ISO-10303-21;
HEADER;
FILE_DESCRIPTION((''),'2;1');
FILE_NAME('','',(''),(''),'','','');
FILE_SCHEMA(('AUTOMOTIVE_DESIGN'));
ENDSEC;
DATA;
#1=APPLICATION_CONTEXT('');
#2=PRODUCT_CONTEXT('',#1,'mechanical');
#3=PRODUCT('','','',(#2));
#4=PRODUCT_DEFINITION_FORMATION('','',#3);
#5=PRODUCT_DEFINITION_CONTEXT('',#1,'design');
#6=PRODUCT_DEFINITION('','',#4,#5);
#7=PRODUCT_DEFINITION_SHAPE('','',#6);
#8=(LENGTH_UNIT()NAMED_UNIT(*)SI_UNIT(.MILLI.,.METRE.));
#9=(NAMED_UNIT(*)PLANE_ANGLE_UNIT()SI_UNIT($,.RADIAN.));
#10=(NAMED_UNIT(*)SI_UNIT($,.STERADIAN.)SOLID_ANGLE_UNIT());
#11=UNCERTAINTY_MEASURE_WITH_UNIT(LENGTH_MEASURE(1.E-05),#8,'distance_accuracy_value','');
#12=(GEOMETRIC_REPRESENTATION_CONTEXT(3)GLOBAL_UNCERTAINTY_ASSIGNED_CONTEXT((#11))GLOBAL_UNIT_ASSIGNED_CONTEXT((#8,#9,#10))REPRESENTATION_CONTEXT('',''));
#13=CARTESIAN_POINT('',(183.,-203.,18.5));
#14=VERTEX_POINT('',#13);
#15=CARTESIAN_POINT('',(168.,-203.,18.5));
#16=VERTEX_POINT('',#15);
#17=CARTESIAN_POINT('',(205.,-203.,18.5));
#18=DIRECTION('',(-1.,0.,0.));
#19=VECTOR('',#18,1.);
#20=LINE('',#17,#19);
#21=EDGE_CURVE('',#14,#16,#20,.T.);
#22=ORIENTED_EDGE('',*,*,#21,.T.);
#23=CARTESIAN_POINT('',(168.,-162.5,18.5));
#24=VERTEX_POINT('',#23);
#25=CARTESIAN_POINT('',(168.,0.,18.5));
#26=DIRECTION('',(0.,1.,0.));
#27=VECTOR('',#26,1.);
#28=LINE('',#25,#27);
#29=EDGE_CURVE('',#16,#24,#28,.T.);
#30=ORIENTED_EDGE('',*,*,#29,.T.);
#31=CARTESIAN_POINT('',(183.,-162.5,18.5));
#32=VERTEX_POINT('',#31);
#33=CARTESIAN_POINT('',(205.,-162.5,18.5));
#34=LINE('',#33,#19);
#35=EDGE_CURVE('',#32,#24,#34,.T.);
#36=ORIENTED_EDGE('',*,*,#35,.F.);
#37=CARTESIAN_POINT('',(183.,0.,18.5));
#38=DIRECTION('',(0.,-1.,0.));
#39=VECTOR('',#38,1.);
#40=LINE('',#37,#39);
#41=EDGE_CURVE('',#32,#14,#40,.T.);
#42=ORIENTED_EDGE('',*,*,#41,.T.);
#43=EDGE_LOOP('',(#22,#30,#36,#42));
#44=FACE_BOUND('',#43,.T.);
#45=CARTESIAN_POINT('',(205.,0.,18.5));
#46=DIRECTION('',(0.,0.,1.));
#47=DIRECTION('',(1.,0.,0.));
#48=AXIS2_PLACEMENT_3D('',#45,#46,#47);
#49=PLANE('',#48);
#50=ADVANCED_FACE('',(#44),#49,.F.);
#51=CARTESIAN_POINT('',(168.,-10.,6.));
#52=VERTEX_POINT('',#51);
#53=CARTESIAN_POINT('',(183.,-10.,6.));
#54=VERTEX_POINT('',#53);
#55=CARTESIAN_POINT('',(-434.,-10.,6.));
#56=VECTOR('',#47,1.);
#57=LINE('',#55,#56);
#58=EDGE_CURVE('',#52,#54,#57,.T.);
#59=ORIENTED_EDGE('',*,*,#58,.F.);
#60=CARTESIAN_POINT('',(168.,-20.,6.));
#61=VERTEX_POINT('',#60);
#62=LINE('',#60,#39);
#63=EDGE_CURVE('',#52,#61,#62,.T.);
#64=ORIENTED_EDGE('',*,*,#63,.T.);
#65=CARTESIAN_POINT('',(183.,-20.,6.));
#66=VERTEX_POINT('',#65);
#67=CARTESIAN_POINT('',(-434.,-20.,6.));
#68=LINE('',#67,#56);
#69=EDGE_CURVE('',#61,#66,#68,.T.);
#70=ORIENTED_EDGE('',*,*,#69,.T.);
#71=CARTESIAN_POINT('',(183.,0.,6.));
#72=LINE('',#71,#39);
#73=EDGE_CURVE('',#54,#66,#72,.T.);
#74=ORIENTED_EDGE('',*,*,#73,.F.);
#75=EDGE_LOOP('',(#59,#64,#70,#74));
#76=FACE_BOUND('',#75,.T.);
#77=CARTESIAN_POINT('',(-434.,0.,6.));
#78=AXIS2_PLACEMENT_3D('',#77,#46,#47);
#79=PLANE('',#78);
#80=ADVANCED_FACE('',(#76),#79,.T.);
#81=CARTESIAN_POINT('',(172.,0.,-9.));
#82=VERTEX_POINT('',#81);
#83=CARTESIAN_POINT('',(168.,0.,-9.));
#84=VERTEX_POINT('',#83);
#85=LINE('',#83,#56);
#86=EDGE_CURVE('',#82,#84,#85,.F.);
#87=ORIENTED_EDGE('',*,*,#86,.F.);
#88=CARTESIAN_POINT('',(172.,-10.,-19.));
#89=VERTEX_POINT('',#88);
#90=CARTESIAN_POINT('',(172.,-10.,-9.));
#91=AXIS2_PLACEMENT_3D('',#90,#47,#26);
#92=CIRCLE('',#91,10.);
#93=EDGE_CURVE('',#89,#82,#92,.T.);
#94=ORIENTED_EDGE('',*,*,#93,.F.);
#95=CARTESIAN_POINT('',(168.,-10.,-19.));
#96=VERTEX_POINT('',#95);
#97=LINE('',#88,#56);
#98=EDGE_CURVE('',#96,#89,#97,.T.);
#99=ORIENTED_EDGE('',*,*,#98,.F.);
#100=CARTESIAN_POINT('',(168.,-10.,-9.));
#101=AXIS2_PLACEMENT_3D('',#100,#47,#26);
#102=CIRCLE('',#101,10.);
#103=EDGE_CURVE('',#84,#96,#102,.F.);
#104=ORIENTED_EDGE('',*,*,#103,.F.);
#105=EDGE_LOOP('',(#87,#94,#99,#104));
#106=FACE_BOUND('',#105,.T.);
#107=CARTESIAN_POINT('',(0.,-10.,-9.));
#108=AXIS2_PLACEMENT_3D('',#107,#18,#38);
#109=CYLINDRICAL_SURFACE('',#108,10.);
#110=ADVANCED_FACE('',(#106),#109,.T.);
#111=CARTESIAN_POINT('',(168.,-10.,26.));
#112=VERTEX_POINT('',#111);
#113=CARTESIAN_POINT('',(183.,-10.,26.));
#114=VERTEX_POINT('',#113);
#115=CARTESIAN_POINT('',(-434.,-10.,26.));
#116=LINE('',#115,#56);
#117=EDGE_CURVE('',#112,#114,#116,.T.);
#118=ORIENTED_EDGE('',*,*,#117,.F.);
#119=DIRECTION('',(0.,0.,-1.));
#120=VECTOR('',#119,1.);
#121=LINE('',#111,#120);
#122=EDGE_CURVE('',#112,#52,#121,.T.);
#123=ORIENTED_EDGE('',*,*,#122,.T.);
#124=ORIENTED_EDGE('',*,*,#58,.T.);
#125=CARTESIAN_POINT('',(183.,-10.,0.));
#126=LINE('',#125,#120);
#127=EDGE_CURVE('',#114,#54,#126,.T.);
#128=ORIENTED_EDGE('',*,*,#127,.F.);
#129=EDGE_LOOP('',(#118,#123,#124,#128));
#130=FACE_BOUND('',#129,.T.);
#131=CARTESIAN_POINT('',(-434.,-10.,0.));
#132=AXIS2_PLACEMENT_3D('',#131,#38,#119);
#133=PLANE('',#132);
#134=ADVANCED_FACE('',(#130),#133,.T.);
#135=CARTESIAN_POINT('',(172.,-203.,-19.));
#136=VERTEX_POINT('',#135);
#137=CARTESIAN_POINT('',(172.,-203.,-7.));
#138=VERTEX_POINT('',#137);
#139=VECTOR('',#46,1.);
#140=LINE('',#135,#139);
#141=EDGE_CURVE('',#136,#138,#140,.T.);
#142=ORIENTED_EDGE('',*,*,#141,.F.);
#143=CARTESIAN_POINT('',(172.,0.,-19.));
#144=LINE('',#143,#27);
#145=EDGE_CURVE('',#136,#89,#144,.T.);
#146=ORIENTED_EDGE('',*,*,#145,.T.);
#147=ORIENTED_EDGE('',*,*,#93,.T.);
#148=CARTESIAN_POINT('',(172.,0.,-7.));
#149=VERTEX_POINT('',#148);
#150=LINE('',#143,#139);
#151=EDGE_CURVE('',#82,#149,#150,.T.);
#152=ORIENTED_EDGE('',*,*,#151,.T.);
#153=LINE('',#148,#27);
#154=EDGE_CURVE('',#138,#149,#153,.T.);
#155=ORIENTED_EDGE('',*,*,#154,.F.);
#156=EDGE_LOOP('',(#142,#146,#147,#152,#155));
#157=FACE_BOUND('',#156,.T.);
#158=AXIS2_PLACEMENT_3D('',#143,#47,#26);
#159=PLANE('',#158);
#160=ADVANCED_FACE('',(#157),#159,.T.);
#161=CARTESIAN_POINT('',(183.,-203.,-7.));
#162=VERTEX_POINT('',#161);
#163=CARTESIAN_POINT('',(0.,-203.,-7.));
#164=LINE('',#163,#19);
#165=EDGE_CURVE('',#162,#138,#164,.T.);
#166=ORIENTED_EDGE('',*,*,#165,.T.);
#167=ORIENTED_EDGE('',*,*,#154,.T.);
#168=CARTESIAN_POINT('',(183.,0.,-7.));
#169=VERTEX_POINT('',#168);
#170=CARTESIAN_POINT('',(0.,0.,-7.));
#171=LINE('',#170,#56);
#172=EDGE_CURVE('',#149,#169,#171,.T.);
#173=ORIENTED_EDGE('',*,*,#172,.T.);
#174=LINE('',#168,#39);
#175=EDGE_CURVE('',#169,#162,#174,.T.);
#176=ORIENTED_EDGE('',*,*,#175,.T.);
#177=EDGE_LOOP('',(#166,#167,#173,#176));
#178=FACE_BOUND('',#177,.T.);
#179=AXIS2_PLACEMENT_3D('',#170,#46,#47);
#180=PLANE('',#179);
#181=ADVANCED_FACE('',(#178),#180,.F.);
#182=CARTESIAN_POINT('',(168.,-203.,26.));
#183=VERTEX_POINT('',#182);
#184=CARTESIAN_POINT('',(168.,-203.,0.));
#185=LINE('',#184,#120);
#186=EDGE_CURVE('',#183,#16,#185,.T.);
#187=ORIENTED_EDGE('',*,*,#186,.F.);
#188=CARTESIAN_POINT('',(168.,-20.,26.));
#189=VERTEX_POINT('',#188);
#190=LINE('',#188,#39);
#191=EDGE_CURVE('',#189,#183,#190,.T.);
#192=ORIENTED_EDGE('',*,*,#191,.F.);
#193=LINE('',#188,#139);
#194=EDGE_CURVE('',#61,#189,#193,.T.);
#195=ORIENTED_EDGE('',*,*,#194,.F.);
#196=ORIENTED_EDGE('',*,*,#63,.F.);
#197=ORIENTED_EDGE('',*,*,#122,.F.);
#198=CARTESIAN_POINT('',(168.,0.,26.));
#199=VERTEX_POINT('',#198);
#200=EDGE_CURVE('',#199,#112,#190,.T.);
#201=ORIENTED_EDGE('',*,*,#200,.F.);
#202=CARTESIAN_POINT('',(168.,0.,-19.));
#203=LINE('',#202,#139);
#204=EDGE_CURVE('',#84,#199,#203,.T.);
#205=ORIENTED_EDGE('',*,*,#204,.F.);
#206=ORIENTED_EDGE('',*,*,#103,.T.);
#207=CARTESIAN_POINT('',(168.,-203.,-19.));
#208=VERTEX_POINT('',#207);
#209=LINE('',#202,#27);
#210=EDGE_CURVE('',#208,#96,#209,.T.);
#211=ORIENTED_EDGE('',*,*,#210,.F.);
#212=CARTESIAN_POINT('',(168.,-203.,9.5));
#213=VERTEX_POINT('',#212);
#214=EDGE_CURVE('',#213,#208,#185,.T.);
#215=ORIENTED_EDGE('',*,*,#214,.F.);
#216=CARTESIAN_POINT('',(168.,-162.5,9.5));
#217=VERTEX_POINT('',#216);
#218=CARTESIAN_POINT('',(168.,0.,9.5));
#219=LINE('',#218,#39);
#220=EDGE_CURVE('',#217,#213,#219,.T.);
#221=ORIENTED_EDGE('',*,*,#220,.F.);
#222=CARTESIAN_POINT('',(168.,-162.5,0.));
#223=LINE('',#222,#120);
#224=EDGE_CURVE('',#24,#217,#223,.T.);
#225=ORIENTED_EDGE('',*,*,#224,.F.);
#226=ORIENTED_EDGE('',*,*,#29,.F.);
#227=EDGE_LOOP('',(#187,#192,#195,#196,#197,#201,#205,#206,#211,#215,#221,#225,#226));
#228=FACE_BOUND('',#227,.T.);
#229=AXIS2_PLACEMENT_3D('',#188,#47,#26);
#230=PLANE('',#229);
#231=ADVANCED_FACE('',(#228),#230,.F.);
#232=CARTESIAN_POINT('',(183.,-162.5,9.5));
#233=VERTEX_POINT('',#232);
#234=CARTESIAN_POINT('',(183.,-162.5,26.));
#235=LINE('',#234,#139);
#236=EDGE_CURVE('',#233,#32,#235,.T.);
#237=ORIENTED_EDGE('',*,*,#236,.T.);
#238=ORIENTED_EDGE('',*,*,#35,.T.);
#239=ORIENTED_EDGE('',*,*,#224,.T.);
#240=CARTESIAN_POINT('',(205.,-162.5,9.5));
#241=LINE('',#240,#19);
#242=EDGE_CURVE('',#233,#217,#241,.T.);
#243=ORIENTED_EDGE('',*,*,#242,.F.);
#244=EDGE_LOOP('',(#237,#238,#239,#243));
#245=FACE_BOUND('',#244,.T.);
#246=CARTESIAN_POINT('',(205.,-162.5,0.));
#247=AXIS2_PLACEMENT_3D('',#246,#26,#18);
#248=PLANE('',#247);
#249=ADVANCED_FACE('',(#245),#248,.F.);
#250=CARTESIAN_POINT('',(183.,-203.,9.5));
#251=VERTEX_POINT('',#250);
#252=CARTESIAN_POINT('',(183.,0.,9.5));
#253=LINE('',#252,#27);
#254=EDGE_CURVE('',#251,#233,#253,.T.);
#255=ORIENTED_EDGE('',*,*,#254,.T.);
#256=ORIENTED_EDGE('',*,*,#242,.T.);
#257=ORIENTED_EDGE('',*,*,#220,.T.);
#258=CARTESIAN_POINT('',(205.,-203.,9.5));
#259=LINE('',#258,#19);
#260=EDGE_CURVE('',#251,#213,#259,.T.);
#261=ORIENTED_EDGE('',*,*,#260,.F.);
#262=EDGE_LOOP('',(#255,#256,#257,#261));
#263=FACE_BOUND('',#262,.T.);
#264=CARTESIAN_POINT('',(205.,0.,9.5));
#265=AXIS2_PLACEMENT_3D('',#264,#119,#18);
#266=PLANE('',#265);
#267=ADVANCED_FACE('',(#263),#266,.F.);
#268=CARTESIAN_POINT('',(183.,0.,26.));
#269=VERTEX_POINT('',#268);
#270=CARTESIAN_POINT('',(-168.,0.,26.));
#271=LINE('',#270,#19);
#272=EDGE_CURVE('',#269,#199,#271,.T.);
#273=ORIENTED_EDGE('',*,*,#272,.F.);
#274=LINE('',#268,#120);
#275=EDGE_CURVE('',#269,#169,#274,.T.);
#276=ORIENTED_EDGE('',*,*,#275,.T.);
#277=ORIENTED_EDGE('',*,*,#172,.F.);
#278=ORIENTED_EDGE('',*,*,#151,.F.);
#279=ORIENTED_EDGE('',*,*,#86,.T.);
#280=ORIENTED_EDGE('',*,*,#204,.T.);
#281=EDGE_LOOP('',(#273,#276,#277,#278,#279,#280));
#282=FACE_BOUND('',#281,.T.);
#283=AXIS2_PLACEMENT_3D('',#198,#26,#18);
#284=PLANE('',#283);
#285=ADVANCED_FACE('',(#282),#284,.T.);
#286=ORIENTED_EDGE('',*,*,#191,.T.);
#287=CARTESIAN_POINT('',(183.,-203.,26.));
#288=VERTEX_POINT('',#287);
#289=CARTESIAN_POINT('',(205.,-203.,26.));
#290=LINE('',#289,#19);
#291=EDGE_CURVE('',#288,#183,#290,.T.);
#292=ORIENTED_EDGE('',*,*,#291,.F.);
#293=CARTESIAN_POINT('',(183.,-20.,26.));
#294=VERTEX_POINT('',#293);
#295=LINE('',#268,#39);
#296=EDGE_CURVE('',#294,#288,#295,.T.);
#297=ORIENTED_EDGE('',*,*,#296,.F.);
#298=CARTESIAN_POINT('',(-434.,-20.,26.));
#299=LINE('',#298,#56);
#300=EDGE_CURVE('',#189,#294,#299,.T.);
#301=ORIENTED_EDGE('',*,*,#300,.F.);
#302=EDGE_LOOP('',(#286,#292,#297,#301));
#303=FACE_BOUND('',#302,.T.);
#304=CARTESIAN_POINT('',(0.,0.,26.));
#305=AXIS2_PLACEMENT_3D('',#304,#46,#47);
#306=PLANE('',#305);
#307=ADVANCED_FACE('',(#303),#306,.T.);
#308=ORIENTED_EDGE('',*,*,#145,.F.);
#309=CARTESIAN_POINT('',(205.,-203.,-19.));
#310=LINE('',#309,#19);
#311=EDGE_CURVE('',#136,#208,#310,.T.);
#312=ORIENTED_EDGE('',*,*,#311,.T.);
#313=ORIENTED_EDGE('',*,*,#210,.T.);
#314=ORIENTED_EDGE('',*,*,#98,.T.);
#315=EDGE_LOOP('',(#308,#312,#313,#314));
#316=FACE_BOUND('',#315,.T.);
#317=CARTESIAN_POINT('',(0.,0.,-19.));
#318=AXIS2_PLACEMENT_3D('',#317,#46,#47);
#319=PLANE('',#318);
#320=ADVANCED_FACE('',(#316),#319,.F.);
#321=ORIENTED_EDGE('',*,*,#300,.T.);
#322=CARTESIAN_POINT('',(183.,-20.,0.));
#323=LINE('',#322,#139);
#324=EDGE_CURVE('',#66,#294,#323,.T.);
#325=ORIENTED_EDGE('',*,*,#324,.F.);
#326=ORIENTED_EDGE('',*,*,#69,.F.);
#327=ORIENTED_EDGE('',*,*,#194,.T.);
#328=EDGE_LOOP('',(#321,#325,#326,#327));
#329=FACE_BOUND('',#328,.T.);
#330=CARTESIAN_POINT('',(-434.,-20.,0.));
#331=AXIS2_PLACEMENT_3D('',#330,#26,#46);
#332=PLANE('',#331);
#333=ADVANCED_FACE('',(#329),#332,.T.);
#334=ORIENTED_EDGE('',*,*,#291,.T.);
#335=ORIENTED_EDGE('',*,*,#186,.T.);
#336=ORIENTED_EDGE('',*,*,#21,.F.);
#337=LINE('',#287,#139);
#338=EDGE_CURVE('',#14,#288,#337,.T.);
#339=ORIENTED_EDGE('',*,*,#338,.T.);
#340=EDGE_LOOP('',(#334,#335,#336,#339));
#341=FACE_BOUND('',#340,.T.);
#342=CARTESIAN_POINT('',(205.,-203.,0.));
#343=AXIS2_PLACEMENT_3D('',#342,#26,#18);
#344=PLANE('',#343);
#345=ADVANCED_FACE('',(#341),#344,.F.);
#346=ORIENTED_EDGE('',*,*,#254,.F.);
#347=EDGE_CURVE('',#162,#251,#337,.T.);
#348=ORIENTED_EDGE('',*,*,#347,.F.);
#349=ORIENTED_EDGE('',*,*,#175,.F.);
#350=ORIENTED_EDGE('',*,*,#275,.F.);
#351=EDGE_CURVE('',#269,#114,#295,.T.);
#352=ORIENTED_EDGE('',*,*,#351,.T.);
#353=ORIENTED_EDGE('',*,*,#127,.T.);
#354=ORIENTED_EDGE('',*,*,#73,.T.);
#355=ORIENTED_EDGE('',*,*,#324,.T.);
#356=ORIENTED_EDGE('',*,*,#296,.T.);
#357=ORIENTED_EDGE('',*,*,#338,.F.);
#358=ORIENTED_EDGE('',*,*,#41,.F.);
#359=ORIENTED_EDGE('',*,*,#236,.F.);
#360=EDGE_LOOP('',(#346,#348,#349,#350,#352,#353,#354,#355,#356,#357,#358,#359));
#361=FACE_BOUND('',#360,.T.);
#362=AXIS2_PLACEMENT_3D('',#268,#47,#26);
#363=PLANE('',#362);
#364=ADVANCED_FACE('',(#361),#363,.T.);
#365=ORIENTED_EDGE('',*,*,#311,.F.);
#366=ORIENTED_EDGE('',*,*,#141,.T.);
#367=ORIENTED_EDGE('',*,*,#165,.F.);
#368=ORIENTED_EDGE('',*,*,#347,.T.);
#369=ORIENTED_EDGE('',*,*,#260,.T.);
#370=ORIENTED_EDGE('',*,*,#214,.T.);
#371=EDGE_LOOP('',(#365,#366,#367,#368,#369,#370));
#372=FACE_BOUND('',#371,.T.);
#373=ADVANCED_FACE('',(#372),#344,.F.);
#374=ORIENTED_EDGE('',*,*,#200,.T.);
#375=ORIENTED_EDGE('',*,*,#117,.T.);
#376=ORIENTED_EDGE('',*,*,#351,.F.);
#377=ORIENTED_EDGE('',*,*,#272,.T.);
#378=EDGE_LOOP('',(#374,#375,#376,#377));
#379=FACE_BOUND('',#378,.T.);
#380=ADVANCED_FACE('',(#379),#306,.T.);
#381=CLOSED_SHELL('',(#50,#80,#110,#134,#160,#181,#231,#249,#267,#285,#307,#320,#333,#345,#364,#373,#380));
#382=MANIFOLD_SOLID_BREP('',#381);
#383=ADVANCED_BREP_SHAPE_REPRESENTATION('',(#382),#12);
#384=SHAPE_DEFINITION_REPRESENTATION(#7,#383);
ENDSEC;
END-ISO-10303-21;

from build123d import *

# Parameters (mm, degrees)
EXTRUDE_1_DEPTH        = 26
EXTRUDE_2_DEPTH        = 19
FILLET_1_R             = 10
SKETCH_5_W             = 161
SKETCH_5_H             = 6
CUT_EXTRUDE_1_DEPTH    = 52
SKETCH_1_5_W           = 11
SKETCH_1_5_H           = 340
EXTRUDE_4_DEPTH        = 7
SKETCH_6_W             = 1.9
SKETCH_6_H             = 2
SKETCH_6_W_2           = 6.6
EXTRUDE_5_DEPTH        = 28
SKETCH_6_3_W           = 6.6
SKETCH_6_3_H           = 2
CUT_EXTRUDE_2_DEPTH    = 5
FILLET_2_R             = 20
SKETCH_6_4_W           = 15
SKETCH_6_4_H           = 10
SKETCH_6_4_H_2         = 9
EXTRUDE_6_DEPTH        = 30
SKETCH_6_5_W           = 15
SKETCH_6_5_H           = 9
EXTRUDE_7_DEPTH        = 28
EXTRUDE_8_DEPTH        = 15
FILLET_3_R             = 20
FILLET_3_OF_MIRROR_2_R = 20
FILLET_4_R             = 20
SKETCH_11_W            = 20
SKETCH_11_H            = 20
CUT_EXTRUDE_3_DEPTH    = 617
SKETCH_10_W            = 20
SKETCH_10_H            = 10
CUT_EXTRUDE_4_DEPTH    = 617
CUT_EXTRUDE_START      = -37
SKETCH_12_W            = 8
SKETCH_12_H            = 20
SKETCH_12_W_2          = 0.5
CUT_EXTRUDE_5_DEPTH    = 37


with BuildPart() as part:
    # 스케치1 → 보스-돌출1 (new body)
    with BuildSketch(Plane.XY):
        Polygon((-168, 0), (168, 0), (183, 0), (183, -340), (168, -340), (168, -20), (-168, -20), (-168, -340), (-183, -340), (-183, 0), align=None)
    extrude(amount=EXTRUDE_1_DEPTH)

    # 스케치1<4> → 보스-돌출2 (add)
    with BuildSketch(Plane.XY):
        Polygon((172, 0), (168, 0), (168, -20), (168, -340), (172, -340), align=None)
        Polygon((-168, -20), (-168, 0), (-172, 0), (-172, -340), (-168, -340), align=None)
    extrude(amount=-EXTRUDE_2_DEPTH)

    # 필렛1
    fillet_1_edges = [part.edges().sort_by_distance(p)[0] for p in [
        (170, 0, -19),
        (170, -340, -19),
        (-170, -340, -19),
        (-170, 0, -19),
    ]]
    fillet(fillet_1_edges, radius=FILLET_1_R)

    # 스케치5 → 컷-돌출1 (cut)
    with BuildSketch(Plane(origin=(0, 0, 0), x_dir=(1, 0, 0), z_dir=(0, 1, 0))):
        with Locations((-87.5, -3)):
            Rectangle(SKETCH_5_W, SKETCH_5_H)
        with Locations((87.5, -3)):
            Rectangle(SKETCH_5_W, SKETCH_5_H)
    extrude(amount=-CUT_EXTRUDE_1_DEPTH, mode=Mode.SUBTRACT)

    # 스케치1<5> → 보스-돌출4 (add)
    with BuildSketch(Plane.XY):
        with Locations((177.5, -170)):
            Rectangle(SKETCH_1_5_W, SKETCH_1_5_H)
        with Locations((-177.5, -170)):
            Rectangle(SKETCH_1_5_W, SKETCH_1_5_H)
    extrude(amount=-EXTRUDE_4_DEPTH)

    # 스케치6 → 보스-돌출5 (add)
    with BuildSketch(Plane.XZ.offset(340)):
        with Locations((-182.05, -6)):
            Rectangle(SKETCH_6_W, SKETCH_6_H)
        with Locations((-177.8, -6)):
            Rectangle(SKETCH_6_W_2, SKETCH_6_H)
        Polygon((-174.5, -7), (-172, -7), (-168, -7), (-168, -5), (-174.5, -5), align=None)
    extrude_5 = extrude(amount=EXTRUDE_5_DEPTH)

    # 스케치6<3> → 컷-돌출2 (cut)
    with BuildSketch(Plane.XZ.offset(340)):
        with Locations((-177.8, -6)):
            Rectangle(SKETCH_6_3_W, SKETCH_6_3_H)
    cut_extrude_2 = extrude(amount=CUT_EXTRUDE_2_DEPTH, mode=Mode.SUBTRACT)

    # 필렛2
    # the kernel refuses this fillet: 20 mm, written as the material it adds along each edge
    with BuildSketch(Plane(origin=(-172, -340, -7), x_dir=(0, -1, 0), z_dir=(1, 0, 0))) as fillet_2_piece_1:
        with BuildLine():
            CenterArc((14, 20), FILLET_2_R, 216.869897646, 53.130102354)
            Line((-2, 8), (-3.6, 6.8))
            ThreePointArc((-3.6, 6.8), (-2, 2), (-2, 0))
            Line((-2, 0), (0, -2))
            Line((0, -2), (14, -2))
            Line((14, -2), (14, 0))
        make_face()
    extrude(amount=4)

    # 스케치6<4> → 보스-돌출6 (add)
    with BuildSketch(Plane.XZ.offset(340)):
        with Locations((-175.5, 31)):
            Rectangle(SKETCH_6_4_W, SKETCH_6_4_H)
        with Locations((-175.5, 40.5)):
            Rectangle(SKETCH_6_4_W, SKETCH_6_4_H_2)
    extrude_6 = extrude(amount=-EXTRUDE_6_DEPTH)

    # 스케치6<5> → 보스-돌출7 (add)
    with BuildSketch(Plane.XZ.offset(340)):
        with Locations((-175.5, 40.5)):
            Rectangle(SKETCH_6_5_W, SKETCH_6_5_H)
    extrude_7 = extrude(amount=EXTRUDE_7_DEPTH)

    # 스케치9 → 보스-돌출8 (add)
    with BuildSketch(Plane.ZY.offset(183)):
        Polygon((26, -310), (45, -310), (26, -270), align=None)
    extrude_8 = extrude(amount=-EXTRUDE_8_DEPTH)

    # 필렛3
    fillet_3_edges = [part.edges().sort_by_distance(p)[0] for p in [
        (-175.5, -310, 45),
        (-175.5, -270, 26),
    ]]
    fillet(fillet_3_edges, radius=FILLET_3_R)

    # 대칭 복사2: 보스-돌출5, 컷-돌출2, 보스-돌출6, 보스-돌출7, 보스-돌출8 across plane
    add(extrude_5.mirror(Plane(origin=(0, 0, 0), x_dir=(0, 0, 1), z_dir=(1, 0, 0))))
    add(cut_extrude_2.mirror(Plane(origin=(0, 0, 0), x_dir=(0, 0, 1), z_dir=(1, 0, 0))), mode=Mode.SUBTRACT)
    add(extrude_6.mirror(Plane(origin=(0, 0, 0), x_dir=(0, 0, 1), z_dir=(1, 0, 0))))
    add(extrude_7.mirror(Plane(origin=(0, 0, 0), x_dir=(0, 0, 1), z_dir=(1, 0, 0))))
    add(extrude_8.mirror(Plane(origin=(0, 0, 0), x_dir=(0, 0, 1), z_dir=(1, 0, 0))))

    # 필렛3 of 대칭 복사2
    fillet_3_of_mirror_2_edges = [part.edges().sort_by_distance(p)[0] for p in [
        (175.5, -310, 45),
        (175.5, -270, 26),
    ]]
    fillet(fillet_3_of_mirror_2_edges, radius=FILLET_3_OF_MIRROR_2_R)

    # 필렛4
    # the kernel refuses this fillet: 20 mm, written as the material it adds along each edge
    with BuildSketch(Plane(origin=(172, -340, -7), x_dir=(0, 0.24253562503633938, -0.9701425001453302), z_dir=(-1, 0, 0))) as fillet_4_piece_1:
        with BuildLine():
            CenterArc((16.007351252, 18.432707503), FILLET_4_R, 194.036243468, 53.130102354)
            Line((-3.395498751, 13.581995002), (-5.335783751, 13.096923752))
            Line((-5.335783751, 13.096923752), (-1.940285, -0.48507125))
            Line((-1.940285, -0.48507125), (0.48507125, -1.940285))
            ThreePointArc((0.48507125, -1.940285), (2.42535625, -1.45521375), (7.470097251, -1.84327075))
            Line((7.470097251, -1.84327075), (8.246211251, 0))
        make_face()
    extrude(amount=4)

    # 스케치11 → 컷-돌출3 (cut)
    with BuildSketch(Plane.ZY.offset(-168)):
        with BuildLine():
            ThreePointArc((45, -314.508610159), (44.510394688, -310.110371974), (43.065550087, -305.927473868))
            Line((43.065550087, -305.927473868), (27.934449913, -274.072526132))
            ThreePointArc((27.934449913, -274.072526132), (26.489605312, -269.889628026), (26, -265.491389841))
            Line((26, -265.491389841), (26, -20))
            Line((26, -20), (6, -20))
            Line((6, -20), (6, 0))
            Line((6, 0), (-7, 0))
            Line((-7, 0), (-7, -354))
            Line((-7, -354), (-7, -368))
            Line((-7, -368), (-5, -368))
            Line((-5, -368), (-5, -340))
            Line((-5, -340), (36, -340))
            Line((36, -340), (36, -368))
            Line((36, -368), (45, -368))
            Line((45, -368), (45, -314.508610159))
        make_face()
        with Locations((16, -10)):
            Rectangle(SKETCH_11_W, SKETCH_11_H)
        with BuildLine():
            Line((-7, -354), (-7, 0))
            Line((-7, 0), (-9, 0))
            ThreePointArc((-9, 0), (-16.071067812, -2.928932188), (-19, -10))
            Line((-19, -10), (-19, -330))
            ThreePointArc((-19, -330), (-17.94427191, -334.472135955), (-15, -338))
            ThreePointArc((-15, -338), (-9.11145618, -345.05572809), (-7, -354))
        make_face()
    extrude(amount=CUT_EXTRUDE_3_DEPTH, mode=Mode.SUBTRACT)

    # 스케치10 → 컷-돌출4 (cut)
    with BuildSketch(Plane(origin=(183, 0, 0), x_dir=(0, 0, -1), z_dir=(1, 0, 0))):
        with Locations((-16, -15)):
            Rectangle(SKETCH_10_W, SKETCH_10_H)
    extrude(amount=-CUT_EXTRUDE_4_DEPTH, mode=Mode.SUBTRACT)

    # 스케치12 → 컷-돌출5 (cut)
    with BuildSketch(Plane.ZY.offset(-168).offset(CUT_EXTRUDE_START)):
        with Locations((14, -173)):
            Rectangle(SKETCH_12_W, SKETCH_12_H)
        with BuildLine():
            Line((18.5, -203), (18, -203))
            Line((18, -203), (18, -183))
            Line((18, -183), (10, -183))
            Line((10, -183), (10, -203))
            Line((10, -203), (9.5, -203))
            Line((9.5, -203), (-7, -203))
            Line((-7, -203), (-7, -354))
            Line((-7, -354), (-7, -368))
            Line((-7, -368), (-5, -368))
            Line((-5, -368), (-5, -340))
            Line((-5, -340), (36, -340))
            Line((36, -340), (36, -368))
            Line((36, -368), (45, -368))
            Line((45, -368), (45, -314.508610159))
            ThreePointArc((45, -314.508610159), (44.510394688, -310.110371974), (43.065550087, -305.927473868))
            Line((43.065550087, -305.927473868), (27.934449913, -274.072526132))
            ThreePointArc((27.934449913, -274.072526132), (26.489605312, -269.889628026), (26, -265.491389841))
            Line((26, -265.491389841), (26, -203))
            Line((26, -203), (18.5, -203))
        make_face()
        Polygon((18, -163), (18, -183), (18.5, -183), (18.5, -162.5), (9.5, -162.5), (9.5, -183), (10, -183), (10, -163), align=None)
        with Locations((18.25, -193)):
            Rectangle(SKETCH_12_W_2, SKETCH_12_H)
        with Locations((9.75, -193)):
            Rectangle(SKETCH_12_W_2, SKETCH_12_H)
        with BuildLine():
            Line((-7, -354), (-7, -203))
            Line((-7, -203), (-19, -203))
            Line((-19, -203), (-19, -330))
            ThreePointArc((-19, -330), (-17.94427191, -334.472135955), (-15, -338))
            ThreePointArc((-15, -338), (-9.11145618, -345.05572809), (-7, -354))
        make_face()
    extrude(amount=CUT_EXTRUDE_5_DEPTH, mode=Mode.SUBTRACT)


solid = part.part
